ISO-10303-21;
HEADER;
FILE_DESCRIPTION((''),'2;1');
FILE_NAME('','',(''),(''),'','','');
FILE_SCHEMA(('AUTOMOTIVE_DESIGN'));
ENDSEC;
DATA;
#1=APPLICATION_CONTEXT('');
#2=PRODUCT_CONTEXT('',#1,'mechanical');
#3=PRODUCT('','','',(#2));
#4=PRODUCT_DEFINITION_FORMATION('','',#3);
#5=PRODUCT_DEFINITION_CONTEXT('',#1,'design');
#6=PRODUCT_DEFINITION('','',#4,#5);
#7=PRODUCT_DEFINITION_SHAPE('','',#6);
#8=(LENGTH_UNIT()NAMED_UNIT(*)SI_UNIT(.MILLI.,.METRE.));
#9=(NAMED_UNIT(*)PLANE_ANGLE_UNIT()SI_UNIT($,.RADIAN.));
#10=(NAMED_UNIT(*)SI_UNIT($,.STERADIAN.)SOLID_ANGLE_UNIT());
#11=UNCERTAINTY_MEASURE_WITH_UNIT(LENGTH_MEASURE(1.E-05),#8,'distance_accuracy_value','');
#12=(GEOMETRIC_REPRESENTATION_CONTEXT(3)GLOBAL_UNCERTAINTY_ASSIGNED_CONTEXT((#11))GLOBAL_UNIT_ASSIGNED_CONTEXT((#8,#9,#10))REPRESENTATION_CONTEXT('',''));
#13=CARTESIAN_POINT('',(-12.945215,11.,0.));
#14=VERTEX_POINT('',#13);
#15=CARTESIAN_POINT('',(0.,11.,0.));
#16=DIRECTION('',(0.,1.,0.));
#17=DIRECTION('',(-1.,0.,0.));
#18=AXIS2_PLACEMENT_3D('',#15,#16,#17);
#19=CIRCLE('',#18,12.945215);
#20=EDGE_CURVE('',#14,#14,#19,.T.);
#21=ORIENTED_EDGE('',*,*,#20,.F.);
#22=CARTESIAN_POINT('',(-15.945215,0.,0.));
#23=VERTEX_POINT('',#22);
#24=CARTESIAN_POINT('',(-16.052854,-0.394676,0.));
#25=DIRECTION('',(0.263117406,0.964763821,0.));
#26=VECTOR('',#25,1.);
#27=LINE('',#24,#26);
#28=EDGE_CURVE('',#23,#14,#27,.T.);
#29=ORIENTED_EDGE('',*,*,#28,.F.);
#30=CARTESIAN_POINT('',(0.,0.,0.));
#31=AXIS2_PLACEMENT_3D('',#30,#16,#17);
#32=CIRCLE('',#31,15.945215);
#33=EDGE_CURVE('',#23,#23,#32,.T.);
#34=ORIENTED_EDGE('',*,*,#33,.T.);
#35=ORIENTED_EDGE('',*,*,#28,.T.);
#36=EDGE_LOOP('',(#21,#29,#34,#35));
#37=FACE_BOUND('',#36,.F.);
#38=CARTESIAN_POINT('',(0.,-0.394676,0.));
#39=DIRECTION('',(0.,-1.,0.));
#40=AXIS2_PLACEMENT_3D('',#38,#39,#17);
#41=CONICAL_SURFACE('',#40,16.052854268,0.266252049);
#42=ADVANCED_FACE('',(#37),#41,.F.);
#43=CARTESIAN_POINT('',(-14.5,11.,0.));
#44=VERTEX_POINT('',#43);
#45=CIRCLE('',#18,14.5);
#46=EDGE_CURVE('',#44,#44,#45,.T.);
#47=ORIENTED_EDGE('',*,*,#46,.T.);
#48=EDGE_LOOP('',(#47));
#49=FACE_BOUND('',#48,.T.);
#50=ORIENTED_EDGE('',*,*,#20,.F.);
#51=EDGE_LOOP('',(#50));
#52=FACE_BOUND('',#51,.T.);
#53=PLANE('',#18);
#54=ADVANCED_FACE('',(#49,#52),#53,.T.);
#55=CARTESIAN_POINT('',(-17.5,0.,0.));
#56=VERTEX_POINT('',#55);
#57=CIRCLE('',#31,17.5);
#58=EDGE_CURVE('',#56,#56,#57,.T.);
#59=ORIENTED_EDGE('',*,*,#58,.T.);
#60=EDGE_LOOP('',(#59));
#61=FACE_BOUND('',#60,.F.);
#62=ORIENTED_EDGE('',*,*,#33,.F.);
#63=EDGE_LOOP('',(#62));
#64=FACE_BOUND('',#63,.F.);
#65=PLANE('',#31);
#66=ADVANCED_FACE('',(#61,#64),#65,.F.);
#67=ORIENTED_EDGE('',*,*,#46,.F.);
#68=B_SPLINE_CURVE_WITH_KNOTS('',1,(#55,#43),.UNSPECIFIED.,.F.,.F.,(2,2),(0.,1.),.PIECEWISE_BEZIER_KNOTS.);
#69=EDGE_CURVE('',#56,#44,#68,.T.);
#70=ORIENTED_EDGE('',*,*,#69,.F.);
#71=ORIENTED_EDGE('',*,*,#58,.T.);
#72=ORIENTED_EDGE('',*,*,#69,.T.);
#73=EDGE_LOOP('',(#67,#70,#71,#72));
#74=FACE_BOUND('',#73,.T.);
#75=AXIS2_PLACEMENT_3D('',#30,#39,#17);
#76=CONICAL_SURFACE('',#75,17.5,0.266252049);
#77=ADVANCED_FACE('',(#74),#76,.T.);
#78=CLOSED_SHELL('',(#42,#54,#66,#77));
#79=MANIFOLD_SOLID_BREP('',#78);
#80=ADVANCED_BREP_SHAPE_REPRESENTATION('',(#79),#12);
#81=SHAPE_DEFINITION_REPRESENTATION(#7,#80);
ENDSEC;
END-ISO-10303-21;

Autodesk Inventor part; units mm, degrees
ref_plane "YZ Plane" through (0, 0, 0) normal (1, 0, 0) x (0, 1, 0)
ref_plane "XY Plane" through (0, 0, 0) normal (0, 0, 1) x (1, 0, 0)
sketch "Szkic6" plane through (0, 0, 0) normal (0, 1, 0) x (-1, 0, 0)
  circle A0 centre (0, 0) radius 17.5
  dimension "d33" = 35
ref_plane "Płaszczyzna konstrukcyjna1" through (0, 11, 0) normal (0, 1, 0) x (-1, 0, 0)
sketch "Szkic7" plane through (0, 11, 0) normal (0, 1, 0) x (-1, 0, 0)
  circle A0 centre (0, 0) radius 14.5
  dimension "d35" = 29
loft "Wyciągnięcie złożone1" add profiles "Szkic6", "Szkic7"
shell "Skorupa1" thickness 1.5 removed faces 2 at (1.052, 11, -3.5603) at (-4.3663, 0, -1.0762)
equation "\"d33\" = OD1"
equation "\"d35\" = OD2"
equation "\"d52\" = THK"
equation "\"SzerokośćGięciaPodcięcia\" = Grubość"
equation "\"RozmiarPodcięciaNarożnika\" = 4 * Grubość"
equation "\"PromieńPrzejścia\" = PromieńGięcia"
equation "\"Rozmiar_promienia_Jacobiego\" = PromieńGięcia"
equation "\"Wielk_odstępu\" = Grubość"
equation "\"d2\" = PromieńGięcia"
equation "\"d23\" = PromieńGięcia"
equation "\"OD1\" = 35"
equation "\"OD2\" = 29"
equation "\"L\" = 11"
equation "\"THK\" = 1.5"
equation "\"d34\" = L"
equation "\"Grubość\" = 1.5"
equation "\"PromieńGięcia\" = 3"
properties part number "Redukcja symetryczna Ø35x29x1,5 L=11" material "304"
